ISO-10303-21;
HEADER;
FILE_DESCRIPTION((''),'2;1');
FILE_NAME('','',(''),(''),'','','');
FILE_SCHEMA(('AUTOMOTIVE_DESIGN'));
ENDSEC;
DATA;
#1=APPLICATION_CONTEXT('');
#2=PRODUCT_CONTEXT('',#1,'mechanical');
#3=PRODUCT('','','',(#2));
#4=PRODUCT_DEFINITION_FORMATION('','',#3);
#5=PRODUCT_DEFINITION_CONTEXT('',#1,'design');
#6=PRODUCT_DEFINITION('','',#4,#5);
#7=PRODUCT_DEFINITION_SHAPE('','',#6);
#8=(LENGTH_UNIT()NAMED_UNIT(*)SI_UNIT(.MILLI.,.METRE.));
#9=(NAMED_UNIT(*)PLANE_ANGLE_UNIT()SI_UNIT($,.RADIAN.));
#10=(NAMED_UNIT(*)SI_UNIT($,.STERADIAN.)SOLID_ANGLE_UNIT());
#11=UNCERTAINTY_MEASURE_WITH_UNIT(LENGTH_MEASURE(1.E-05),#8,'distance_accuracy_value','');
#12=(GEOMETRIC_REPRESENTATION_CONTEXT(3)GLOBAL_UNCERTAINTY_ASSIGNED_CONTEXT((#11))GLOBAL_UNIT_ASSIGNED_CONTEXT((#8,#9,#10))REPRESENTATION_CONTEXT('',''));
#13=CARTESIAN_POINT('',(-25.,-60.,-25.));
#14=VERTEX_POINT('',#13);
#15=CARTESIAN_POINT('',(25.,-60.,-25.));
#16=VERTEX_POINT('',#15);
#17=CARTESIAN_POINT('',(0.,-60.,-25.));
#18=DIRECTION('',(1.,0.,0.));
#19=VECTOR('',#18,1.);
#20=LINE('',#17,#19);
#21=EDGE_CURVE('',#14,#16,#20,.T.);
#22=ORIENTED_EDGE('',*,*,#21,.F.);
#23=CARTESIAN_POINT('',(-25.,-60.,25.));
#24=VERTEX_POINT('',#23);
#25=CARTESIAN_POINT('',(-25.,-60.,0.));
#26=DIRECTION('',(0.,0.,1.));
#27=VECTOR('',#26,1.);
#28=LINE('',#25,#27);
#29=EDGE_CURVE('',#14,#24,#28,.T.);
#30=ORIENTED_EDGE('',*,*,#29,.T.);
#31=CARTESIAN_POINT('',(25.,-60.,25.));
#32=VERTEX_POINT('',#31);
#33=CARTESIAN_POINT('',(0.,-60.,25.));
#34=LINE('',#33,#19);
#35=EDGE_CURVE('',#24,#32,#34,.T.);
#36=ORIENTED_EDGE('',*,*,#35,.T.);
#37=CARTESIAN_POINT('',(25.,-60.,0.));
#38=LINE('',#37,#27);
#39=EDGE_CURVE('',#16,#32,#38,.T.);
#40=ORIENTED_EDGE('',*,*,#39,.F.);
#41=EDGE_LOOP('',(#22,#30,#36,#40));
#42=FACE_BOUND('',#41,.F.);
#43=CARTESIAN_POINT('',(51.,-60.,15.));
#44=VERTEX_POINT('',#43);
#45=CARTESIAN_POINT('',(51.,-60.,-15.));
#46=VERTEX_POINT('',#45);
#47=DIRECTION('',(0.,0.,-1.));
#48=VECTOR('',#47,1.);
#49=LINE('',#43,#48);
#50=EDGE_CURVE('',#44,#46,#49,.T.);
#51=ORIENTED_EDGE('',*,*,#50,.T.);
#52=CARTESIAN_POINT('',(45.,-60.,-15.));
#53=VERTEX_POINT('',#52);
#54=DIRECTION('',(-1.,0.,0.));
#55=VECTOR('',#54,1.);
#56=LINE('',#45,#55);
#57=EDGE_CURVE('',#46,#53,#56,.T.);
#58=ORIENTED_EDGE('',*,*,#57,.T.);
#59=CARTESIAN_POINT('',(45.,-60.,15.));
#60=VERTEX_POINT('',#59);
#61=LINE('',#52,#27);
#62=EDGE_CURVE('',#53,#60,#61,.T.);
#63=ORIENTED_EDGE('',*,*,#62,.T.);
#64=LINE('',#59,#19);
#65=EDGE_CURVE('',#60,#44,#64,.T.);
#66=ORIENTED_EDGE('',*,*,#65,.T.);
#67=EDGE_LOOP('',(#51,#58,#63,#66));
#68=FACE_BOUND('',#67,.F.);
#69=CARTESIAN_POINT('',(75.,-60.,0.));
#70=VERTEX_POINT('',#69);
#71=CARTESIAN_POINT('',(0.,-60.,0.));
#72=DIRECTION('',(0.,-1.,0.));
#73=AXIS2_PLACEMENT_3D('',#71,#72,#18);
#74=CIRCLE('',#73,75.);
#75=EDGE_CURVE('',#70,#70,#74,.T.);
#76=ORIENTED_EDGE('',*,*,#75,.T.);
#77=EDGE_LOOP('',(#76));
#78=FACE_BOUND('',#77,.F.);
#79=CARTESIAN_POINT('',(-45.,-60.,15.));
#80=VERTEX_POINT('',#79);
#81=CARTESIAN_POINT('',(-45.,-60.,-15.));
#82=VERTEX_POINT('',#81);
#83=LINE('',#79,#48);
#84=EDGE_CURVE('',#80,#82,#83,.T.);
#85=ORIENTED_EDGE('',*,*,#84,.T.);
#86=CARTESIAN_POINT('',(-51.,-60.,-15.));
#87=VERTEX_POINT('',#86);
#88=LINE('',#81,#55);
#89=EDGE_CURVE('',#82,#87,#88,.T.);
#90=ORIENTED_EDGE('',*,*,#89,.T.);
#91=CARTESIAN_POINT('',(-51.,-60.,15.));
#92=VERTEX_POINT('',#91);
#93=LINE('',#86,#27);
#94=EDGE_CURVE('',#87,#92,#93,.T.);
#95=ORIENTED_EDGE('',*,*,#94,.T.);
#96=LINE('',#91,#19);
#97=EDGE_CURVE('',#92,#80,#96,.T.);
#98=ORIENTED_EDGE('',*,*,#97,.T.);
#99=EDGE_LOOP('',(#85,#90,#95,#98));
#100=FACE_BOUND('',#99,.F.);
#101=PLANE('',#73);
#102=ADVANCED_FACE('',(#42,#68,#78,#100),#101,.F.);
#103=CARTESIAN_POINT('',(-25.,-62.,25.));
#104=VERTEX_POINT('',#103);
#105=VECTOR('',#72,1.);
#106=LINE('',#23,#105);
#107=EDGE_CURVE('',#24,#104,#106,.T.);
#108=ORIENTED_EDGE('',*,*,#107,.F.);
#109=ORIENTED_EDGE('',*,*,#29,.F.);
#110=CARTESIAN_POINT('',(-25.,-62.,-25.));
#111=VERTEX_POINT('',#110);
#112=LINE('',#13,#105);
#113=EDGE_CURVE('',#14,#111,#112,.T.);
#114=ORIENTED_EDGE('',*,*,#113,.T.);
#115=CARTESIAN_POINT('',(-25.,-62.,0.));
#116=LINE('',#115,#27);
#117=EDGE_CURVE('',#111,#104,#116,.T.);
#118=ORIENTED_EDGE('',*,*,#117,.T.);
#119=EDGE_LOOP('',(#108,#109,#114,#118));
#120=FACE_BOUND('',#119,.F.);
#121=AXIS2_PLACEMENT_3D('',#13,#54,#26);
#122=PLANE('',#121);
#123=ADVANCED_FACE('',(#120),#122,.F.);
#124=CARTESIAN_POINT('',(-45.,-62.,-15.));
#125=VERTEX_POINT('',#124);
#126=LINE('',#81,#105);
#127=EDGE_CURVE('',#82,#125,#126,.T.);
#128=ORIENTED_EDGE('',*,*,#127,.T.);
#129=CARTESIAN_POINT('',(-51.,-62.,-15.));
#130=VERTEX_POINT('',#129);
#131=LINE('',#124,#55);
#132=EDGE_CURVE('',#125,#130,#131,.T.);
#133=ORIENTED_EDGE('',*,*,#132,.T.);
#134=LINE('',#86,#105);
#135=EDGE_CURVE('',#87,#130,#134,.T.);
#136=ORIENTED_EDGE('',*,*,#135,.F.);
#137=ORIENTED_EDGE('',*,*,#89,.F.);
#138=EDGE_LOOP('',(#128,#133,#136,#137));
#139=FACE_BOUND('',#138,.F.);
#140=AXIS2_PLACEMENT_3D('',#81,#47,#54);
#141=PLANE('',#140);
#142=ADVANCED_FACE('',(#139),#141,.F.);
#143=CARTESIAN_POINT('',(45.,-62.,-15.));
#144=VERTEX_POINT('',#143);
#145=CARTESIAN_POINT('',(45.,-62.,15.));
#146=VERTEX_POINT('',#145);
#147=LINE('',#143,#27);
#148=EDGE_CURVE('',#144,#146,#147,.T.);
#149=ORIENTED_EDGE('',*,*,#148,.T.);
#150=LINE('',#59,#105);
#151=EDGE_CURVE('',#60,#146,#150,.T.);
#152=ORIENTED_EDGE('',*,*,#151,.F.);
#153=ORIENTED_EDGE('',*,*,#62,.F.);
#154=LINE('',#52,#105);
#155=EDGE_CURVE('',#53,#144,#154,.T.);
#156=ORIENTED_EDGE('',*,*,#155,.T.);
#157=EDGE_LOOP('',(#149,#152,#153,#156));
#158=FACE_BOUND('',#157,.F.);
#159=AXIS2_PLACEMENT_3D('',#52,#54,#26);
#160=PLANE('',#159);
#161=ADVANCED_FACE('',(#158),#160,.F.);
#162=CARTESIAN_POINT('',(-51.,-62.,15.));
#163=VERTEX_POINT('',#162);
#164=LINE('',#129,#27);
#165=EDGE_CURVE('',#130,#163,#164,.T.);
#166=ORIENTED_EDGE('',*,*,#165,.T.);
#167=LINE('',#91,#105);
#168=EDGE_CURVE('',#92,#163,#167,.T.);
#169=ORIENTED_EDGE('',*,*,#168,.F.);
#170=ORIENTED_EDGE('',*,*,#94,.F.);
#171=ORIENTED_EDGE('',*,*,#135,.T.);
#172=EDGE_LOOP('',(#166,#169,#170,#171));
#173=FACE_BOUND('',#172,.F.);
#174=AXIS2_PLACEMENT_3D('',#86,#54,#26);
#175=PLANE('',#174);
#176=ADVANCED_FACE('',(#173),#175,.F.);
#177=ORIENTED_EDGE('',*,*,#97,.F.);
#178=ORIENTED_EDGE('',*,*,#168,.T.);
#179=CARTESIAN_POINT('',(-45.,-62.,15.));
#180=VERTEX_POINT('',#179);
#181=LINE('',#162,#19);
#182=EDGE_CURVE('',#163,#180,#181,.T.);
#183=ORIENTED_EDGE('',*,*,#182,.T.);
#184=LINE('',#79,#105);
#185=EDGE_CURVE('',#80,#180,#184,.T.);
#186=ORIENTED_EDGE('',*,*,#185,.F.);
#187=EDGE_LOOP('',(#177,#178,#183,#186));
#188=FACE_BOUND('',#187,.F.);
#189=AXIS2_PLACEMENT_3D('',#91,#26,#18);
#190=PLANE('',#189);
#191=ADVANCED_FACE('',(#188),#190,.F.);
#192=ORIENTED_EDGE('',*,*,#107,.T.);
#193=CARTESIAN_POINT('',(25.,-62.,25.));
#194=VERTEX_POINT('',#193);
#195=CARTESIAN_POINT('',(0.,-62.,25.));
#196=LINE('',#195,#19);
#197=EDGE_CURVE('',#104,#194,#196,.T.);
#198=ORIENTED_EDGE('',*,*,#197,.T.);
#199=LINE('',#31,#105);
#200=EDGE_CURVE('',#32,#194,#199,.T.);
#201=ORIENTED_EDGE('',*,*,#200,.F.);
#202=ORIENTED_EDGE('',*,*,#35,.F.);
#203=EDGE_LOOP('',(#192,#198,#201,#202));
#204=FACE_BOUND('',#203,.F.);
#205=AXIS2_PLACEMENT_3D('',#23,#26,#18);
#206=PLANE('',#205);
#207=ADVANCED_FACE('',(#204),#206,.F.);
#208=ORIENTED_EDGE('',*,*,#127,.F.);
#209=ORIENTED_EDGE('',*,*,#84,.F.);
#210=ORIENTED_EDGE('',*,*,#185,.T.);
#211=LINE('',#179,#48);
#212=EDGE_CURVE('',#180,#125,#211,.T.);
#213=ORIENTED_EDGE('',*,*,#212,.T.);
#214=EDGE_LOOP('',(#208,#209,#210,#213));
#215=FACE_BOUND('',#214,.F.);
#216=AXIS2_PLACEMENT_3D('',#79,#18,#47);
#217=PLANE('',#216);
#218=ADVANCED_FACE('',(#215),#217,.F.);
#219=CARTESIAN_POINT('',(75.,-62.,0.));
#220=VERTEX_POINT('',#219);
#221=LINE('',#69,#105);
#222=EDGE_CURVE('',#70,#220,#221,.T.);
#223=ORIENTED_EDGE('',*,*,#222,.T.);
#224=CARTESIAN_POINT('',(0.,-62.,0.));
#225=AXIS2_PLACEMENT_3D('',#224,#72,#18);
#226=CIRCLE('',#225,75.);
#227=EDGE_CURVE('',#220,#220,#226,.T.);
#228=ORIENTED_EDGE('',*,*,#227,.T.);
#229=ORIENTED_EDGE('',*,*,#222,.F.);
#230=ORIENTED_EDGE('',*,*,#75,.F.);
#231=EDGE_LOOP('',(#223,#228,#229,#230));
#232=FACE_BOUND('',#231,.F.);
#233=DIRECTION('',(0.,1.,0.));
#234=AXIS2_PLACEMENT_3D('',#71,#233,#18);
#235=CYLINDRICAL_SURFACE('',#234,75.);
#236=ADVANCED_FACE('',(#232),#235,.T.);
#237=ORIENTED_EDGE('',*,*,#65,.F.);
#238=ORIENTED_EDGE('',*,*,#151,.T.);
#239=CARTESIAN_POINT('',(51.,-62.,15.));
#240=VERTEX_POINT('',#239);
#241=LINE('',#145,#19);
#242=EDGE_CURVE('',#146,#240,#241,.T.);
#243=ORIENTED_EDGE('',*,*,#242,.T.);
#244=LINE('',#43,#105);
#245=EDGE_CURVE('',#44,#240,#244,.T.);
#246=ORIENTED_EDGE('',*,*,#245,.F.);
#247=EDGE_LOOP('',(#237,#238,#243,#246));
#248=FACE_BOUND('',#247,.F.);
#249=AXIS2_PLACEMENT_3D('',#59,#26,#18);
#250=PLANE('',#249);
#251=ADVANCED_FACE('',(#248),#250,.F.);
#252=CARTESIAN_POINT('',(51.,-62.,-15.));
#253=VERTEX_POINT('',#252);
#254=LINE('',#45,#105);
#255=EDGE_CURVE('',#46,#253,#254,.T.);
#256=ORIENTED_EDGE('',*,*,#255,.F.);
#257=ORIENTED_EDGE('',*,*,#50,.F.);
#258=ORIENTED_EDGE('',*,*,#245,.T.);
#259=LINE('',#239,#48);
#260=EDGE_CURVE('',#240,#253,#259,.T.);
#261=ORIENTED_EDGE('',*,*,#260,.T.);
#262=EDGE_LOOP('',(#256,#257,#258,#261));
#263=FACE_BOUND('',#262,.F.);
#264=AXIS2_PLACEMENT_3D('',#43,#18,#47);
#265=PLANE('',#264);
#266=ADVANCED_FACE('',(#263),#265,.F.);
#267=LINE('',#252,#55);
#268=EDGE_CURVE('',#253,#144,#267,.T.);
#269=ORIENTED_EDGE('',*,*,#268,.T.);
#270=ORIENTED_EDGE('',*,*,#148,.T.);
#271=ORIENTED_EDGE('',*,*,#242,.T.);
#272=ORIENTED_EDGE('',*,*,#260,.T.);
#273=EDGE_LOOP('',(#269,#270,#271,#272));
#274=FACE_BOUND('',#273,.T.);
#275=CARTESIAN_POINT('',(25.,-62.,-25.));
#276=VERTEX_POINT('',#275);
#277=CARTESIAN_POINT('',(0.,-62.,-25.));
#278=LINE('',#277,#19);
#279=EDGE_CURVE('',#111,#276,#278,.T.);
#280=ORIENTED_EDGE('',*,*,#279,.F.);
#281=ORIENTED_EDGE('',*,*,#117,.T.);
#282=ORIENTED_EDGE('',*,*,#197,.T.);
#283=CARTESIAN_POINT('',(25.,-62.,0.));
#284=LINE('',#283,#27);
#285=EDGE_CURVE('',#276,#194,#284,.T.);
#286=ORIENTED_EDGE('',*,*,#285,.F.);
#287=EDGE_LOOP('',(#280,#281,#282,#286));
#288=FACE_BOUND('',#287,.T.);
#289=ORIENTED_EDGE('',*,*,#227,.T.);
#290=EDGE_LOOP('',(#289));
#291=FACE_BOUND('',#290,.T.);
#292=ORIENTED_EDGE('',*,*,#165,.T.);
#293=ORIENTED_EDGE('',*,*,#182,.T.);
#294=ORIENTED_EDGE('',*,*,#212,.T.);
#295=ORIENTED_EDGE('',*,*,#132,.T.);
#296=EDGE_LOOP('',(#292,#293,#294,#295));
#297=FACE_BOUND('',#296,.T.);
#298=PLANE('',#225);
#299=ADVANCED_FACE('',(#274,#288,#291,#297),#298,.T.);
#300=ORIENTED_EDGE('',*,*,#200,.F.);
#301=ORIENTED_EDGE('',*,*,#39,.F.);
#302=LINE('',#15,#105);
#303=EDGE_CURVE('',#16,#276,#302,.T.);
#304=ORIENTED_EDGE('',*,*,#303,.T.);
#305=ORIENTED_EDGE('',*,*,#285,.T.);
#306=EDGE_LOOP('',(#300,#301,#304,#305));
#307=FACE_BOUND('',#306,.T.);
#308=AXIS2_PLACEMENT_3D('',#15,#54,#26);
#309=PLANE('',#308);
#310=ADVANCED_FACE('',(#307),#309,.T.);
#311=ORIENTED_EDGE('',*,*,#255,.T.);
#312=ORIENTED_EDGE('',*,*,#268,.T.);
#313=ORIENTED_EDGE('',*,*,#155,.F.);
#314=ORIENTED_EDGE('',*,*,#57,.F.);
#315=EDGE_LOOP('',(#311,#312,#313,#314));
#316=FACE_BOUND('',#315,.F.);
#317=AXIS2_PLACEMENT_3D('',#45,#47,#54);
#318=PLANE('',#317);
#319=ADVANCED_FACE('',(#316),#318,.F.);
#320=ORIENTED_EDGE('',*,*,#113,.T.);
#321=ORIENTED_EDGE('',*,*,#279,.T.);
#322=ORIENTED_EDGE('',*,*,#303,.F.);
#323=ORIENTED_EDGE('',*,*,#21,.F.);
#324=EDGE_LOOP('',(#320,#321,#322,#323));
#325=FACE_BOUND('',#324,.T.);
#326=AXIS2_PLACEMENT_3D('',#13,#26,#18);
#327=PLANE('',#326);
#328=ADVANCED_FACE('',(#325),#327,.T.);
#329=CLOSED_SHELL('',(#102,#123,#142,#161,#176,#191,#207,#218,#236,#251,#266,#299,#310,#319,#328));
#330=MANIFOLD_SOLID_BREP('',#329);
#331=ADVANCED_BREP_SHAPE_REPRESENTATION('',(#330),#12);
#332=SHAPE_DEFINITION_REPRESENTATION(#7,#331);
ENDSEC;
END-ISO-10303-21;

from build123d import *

# Parameters (mm, degrees)
F2_R     = 75
F2_W     = 50
F2_H     = 50
F3_DEPTH = 2


# Not quite as in the source:
# - a feature of the source that left no trace in its solid (it failed there, or was rolled back) is left out


with BuildPart() as f3:
    # F2 (on offset) → F3 (new body)
    with BuildSketch(Plane.XZ.offset(60)):
        Circle(F2_R)
        Polygon((-45, 15), (-45, 0), (-45, -15), (-51, -15), (-51, 15), align=None, mode=Mode.SUBTRACT)
        Rectangle(F2_W, F2_H, mode=Mode.SUBTRACT)
        Polygon((45, -15), (45, 0), (45, 15), (51, 15), (51, -15), align=None, mode=Mode.SUBTRACT)
    extrude(amount=F3_DEPTH)


solid = f3.part
